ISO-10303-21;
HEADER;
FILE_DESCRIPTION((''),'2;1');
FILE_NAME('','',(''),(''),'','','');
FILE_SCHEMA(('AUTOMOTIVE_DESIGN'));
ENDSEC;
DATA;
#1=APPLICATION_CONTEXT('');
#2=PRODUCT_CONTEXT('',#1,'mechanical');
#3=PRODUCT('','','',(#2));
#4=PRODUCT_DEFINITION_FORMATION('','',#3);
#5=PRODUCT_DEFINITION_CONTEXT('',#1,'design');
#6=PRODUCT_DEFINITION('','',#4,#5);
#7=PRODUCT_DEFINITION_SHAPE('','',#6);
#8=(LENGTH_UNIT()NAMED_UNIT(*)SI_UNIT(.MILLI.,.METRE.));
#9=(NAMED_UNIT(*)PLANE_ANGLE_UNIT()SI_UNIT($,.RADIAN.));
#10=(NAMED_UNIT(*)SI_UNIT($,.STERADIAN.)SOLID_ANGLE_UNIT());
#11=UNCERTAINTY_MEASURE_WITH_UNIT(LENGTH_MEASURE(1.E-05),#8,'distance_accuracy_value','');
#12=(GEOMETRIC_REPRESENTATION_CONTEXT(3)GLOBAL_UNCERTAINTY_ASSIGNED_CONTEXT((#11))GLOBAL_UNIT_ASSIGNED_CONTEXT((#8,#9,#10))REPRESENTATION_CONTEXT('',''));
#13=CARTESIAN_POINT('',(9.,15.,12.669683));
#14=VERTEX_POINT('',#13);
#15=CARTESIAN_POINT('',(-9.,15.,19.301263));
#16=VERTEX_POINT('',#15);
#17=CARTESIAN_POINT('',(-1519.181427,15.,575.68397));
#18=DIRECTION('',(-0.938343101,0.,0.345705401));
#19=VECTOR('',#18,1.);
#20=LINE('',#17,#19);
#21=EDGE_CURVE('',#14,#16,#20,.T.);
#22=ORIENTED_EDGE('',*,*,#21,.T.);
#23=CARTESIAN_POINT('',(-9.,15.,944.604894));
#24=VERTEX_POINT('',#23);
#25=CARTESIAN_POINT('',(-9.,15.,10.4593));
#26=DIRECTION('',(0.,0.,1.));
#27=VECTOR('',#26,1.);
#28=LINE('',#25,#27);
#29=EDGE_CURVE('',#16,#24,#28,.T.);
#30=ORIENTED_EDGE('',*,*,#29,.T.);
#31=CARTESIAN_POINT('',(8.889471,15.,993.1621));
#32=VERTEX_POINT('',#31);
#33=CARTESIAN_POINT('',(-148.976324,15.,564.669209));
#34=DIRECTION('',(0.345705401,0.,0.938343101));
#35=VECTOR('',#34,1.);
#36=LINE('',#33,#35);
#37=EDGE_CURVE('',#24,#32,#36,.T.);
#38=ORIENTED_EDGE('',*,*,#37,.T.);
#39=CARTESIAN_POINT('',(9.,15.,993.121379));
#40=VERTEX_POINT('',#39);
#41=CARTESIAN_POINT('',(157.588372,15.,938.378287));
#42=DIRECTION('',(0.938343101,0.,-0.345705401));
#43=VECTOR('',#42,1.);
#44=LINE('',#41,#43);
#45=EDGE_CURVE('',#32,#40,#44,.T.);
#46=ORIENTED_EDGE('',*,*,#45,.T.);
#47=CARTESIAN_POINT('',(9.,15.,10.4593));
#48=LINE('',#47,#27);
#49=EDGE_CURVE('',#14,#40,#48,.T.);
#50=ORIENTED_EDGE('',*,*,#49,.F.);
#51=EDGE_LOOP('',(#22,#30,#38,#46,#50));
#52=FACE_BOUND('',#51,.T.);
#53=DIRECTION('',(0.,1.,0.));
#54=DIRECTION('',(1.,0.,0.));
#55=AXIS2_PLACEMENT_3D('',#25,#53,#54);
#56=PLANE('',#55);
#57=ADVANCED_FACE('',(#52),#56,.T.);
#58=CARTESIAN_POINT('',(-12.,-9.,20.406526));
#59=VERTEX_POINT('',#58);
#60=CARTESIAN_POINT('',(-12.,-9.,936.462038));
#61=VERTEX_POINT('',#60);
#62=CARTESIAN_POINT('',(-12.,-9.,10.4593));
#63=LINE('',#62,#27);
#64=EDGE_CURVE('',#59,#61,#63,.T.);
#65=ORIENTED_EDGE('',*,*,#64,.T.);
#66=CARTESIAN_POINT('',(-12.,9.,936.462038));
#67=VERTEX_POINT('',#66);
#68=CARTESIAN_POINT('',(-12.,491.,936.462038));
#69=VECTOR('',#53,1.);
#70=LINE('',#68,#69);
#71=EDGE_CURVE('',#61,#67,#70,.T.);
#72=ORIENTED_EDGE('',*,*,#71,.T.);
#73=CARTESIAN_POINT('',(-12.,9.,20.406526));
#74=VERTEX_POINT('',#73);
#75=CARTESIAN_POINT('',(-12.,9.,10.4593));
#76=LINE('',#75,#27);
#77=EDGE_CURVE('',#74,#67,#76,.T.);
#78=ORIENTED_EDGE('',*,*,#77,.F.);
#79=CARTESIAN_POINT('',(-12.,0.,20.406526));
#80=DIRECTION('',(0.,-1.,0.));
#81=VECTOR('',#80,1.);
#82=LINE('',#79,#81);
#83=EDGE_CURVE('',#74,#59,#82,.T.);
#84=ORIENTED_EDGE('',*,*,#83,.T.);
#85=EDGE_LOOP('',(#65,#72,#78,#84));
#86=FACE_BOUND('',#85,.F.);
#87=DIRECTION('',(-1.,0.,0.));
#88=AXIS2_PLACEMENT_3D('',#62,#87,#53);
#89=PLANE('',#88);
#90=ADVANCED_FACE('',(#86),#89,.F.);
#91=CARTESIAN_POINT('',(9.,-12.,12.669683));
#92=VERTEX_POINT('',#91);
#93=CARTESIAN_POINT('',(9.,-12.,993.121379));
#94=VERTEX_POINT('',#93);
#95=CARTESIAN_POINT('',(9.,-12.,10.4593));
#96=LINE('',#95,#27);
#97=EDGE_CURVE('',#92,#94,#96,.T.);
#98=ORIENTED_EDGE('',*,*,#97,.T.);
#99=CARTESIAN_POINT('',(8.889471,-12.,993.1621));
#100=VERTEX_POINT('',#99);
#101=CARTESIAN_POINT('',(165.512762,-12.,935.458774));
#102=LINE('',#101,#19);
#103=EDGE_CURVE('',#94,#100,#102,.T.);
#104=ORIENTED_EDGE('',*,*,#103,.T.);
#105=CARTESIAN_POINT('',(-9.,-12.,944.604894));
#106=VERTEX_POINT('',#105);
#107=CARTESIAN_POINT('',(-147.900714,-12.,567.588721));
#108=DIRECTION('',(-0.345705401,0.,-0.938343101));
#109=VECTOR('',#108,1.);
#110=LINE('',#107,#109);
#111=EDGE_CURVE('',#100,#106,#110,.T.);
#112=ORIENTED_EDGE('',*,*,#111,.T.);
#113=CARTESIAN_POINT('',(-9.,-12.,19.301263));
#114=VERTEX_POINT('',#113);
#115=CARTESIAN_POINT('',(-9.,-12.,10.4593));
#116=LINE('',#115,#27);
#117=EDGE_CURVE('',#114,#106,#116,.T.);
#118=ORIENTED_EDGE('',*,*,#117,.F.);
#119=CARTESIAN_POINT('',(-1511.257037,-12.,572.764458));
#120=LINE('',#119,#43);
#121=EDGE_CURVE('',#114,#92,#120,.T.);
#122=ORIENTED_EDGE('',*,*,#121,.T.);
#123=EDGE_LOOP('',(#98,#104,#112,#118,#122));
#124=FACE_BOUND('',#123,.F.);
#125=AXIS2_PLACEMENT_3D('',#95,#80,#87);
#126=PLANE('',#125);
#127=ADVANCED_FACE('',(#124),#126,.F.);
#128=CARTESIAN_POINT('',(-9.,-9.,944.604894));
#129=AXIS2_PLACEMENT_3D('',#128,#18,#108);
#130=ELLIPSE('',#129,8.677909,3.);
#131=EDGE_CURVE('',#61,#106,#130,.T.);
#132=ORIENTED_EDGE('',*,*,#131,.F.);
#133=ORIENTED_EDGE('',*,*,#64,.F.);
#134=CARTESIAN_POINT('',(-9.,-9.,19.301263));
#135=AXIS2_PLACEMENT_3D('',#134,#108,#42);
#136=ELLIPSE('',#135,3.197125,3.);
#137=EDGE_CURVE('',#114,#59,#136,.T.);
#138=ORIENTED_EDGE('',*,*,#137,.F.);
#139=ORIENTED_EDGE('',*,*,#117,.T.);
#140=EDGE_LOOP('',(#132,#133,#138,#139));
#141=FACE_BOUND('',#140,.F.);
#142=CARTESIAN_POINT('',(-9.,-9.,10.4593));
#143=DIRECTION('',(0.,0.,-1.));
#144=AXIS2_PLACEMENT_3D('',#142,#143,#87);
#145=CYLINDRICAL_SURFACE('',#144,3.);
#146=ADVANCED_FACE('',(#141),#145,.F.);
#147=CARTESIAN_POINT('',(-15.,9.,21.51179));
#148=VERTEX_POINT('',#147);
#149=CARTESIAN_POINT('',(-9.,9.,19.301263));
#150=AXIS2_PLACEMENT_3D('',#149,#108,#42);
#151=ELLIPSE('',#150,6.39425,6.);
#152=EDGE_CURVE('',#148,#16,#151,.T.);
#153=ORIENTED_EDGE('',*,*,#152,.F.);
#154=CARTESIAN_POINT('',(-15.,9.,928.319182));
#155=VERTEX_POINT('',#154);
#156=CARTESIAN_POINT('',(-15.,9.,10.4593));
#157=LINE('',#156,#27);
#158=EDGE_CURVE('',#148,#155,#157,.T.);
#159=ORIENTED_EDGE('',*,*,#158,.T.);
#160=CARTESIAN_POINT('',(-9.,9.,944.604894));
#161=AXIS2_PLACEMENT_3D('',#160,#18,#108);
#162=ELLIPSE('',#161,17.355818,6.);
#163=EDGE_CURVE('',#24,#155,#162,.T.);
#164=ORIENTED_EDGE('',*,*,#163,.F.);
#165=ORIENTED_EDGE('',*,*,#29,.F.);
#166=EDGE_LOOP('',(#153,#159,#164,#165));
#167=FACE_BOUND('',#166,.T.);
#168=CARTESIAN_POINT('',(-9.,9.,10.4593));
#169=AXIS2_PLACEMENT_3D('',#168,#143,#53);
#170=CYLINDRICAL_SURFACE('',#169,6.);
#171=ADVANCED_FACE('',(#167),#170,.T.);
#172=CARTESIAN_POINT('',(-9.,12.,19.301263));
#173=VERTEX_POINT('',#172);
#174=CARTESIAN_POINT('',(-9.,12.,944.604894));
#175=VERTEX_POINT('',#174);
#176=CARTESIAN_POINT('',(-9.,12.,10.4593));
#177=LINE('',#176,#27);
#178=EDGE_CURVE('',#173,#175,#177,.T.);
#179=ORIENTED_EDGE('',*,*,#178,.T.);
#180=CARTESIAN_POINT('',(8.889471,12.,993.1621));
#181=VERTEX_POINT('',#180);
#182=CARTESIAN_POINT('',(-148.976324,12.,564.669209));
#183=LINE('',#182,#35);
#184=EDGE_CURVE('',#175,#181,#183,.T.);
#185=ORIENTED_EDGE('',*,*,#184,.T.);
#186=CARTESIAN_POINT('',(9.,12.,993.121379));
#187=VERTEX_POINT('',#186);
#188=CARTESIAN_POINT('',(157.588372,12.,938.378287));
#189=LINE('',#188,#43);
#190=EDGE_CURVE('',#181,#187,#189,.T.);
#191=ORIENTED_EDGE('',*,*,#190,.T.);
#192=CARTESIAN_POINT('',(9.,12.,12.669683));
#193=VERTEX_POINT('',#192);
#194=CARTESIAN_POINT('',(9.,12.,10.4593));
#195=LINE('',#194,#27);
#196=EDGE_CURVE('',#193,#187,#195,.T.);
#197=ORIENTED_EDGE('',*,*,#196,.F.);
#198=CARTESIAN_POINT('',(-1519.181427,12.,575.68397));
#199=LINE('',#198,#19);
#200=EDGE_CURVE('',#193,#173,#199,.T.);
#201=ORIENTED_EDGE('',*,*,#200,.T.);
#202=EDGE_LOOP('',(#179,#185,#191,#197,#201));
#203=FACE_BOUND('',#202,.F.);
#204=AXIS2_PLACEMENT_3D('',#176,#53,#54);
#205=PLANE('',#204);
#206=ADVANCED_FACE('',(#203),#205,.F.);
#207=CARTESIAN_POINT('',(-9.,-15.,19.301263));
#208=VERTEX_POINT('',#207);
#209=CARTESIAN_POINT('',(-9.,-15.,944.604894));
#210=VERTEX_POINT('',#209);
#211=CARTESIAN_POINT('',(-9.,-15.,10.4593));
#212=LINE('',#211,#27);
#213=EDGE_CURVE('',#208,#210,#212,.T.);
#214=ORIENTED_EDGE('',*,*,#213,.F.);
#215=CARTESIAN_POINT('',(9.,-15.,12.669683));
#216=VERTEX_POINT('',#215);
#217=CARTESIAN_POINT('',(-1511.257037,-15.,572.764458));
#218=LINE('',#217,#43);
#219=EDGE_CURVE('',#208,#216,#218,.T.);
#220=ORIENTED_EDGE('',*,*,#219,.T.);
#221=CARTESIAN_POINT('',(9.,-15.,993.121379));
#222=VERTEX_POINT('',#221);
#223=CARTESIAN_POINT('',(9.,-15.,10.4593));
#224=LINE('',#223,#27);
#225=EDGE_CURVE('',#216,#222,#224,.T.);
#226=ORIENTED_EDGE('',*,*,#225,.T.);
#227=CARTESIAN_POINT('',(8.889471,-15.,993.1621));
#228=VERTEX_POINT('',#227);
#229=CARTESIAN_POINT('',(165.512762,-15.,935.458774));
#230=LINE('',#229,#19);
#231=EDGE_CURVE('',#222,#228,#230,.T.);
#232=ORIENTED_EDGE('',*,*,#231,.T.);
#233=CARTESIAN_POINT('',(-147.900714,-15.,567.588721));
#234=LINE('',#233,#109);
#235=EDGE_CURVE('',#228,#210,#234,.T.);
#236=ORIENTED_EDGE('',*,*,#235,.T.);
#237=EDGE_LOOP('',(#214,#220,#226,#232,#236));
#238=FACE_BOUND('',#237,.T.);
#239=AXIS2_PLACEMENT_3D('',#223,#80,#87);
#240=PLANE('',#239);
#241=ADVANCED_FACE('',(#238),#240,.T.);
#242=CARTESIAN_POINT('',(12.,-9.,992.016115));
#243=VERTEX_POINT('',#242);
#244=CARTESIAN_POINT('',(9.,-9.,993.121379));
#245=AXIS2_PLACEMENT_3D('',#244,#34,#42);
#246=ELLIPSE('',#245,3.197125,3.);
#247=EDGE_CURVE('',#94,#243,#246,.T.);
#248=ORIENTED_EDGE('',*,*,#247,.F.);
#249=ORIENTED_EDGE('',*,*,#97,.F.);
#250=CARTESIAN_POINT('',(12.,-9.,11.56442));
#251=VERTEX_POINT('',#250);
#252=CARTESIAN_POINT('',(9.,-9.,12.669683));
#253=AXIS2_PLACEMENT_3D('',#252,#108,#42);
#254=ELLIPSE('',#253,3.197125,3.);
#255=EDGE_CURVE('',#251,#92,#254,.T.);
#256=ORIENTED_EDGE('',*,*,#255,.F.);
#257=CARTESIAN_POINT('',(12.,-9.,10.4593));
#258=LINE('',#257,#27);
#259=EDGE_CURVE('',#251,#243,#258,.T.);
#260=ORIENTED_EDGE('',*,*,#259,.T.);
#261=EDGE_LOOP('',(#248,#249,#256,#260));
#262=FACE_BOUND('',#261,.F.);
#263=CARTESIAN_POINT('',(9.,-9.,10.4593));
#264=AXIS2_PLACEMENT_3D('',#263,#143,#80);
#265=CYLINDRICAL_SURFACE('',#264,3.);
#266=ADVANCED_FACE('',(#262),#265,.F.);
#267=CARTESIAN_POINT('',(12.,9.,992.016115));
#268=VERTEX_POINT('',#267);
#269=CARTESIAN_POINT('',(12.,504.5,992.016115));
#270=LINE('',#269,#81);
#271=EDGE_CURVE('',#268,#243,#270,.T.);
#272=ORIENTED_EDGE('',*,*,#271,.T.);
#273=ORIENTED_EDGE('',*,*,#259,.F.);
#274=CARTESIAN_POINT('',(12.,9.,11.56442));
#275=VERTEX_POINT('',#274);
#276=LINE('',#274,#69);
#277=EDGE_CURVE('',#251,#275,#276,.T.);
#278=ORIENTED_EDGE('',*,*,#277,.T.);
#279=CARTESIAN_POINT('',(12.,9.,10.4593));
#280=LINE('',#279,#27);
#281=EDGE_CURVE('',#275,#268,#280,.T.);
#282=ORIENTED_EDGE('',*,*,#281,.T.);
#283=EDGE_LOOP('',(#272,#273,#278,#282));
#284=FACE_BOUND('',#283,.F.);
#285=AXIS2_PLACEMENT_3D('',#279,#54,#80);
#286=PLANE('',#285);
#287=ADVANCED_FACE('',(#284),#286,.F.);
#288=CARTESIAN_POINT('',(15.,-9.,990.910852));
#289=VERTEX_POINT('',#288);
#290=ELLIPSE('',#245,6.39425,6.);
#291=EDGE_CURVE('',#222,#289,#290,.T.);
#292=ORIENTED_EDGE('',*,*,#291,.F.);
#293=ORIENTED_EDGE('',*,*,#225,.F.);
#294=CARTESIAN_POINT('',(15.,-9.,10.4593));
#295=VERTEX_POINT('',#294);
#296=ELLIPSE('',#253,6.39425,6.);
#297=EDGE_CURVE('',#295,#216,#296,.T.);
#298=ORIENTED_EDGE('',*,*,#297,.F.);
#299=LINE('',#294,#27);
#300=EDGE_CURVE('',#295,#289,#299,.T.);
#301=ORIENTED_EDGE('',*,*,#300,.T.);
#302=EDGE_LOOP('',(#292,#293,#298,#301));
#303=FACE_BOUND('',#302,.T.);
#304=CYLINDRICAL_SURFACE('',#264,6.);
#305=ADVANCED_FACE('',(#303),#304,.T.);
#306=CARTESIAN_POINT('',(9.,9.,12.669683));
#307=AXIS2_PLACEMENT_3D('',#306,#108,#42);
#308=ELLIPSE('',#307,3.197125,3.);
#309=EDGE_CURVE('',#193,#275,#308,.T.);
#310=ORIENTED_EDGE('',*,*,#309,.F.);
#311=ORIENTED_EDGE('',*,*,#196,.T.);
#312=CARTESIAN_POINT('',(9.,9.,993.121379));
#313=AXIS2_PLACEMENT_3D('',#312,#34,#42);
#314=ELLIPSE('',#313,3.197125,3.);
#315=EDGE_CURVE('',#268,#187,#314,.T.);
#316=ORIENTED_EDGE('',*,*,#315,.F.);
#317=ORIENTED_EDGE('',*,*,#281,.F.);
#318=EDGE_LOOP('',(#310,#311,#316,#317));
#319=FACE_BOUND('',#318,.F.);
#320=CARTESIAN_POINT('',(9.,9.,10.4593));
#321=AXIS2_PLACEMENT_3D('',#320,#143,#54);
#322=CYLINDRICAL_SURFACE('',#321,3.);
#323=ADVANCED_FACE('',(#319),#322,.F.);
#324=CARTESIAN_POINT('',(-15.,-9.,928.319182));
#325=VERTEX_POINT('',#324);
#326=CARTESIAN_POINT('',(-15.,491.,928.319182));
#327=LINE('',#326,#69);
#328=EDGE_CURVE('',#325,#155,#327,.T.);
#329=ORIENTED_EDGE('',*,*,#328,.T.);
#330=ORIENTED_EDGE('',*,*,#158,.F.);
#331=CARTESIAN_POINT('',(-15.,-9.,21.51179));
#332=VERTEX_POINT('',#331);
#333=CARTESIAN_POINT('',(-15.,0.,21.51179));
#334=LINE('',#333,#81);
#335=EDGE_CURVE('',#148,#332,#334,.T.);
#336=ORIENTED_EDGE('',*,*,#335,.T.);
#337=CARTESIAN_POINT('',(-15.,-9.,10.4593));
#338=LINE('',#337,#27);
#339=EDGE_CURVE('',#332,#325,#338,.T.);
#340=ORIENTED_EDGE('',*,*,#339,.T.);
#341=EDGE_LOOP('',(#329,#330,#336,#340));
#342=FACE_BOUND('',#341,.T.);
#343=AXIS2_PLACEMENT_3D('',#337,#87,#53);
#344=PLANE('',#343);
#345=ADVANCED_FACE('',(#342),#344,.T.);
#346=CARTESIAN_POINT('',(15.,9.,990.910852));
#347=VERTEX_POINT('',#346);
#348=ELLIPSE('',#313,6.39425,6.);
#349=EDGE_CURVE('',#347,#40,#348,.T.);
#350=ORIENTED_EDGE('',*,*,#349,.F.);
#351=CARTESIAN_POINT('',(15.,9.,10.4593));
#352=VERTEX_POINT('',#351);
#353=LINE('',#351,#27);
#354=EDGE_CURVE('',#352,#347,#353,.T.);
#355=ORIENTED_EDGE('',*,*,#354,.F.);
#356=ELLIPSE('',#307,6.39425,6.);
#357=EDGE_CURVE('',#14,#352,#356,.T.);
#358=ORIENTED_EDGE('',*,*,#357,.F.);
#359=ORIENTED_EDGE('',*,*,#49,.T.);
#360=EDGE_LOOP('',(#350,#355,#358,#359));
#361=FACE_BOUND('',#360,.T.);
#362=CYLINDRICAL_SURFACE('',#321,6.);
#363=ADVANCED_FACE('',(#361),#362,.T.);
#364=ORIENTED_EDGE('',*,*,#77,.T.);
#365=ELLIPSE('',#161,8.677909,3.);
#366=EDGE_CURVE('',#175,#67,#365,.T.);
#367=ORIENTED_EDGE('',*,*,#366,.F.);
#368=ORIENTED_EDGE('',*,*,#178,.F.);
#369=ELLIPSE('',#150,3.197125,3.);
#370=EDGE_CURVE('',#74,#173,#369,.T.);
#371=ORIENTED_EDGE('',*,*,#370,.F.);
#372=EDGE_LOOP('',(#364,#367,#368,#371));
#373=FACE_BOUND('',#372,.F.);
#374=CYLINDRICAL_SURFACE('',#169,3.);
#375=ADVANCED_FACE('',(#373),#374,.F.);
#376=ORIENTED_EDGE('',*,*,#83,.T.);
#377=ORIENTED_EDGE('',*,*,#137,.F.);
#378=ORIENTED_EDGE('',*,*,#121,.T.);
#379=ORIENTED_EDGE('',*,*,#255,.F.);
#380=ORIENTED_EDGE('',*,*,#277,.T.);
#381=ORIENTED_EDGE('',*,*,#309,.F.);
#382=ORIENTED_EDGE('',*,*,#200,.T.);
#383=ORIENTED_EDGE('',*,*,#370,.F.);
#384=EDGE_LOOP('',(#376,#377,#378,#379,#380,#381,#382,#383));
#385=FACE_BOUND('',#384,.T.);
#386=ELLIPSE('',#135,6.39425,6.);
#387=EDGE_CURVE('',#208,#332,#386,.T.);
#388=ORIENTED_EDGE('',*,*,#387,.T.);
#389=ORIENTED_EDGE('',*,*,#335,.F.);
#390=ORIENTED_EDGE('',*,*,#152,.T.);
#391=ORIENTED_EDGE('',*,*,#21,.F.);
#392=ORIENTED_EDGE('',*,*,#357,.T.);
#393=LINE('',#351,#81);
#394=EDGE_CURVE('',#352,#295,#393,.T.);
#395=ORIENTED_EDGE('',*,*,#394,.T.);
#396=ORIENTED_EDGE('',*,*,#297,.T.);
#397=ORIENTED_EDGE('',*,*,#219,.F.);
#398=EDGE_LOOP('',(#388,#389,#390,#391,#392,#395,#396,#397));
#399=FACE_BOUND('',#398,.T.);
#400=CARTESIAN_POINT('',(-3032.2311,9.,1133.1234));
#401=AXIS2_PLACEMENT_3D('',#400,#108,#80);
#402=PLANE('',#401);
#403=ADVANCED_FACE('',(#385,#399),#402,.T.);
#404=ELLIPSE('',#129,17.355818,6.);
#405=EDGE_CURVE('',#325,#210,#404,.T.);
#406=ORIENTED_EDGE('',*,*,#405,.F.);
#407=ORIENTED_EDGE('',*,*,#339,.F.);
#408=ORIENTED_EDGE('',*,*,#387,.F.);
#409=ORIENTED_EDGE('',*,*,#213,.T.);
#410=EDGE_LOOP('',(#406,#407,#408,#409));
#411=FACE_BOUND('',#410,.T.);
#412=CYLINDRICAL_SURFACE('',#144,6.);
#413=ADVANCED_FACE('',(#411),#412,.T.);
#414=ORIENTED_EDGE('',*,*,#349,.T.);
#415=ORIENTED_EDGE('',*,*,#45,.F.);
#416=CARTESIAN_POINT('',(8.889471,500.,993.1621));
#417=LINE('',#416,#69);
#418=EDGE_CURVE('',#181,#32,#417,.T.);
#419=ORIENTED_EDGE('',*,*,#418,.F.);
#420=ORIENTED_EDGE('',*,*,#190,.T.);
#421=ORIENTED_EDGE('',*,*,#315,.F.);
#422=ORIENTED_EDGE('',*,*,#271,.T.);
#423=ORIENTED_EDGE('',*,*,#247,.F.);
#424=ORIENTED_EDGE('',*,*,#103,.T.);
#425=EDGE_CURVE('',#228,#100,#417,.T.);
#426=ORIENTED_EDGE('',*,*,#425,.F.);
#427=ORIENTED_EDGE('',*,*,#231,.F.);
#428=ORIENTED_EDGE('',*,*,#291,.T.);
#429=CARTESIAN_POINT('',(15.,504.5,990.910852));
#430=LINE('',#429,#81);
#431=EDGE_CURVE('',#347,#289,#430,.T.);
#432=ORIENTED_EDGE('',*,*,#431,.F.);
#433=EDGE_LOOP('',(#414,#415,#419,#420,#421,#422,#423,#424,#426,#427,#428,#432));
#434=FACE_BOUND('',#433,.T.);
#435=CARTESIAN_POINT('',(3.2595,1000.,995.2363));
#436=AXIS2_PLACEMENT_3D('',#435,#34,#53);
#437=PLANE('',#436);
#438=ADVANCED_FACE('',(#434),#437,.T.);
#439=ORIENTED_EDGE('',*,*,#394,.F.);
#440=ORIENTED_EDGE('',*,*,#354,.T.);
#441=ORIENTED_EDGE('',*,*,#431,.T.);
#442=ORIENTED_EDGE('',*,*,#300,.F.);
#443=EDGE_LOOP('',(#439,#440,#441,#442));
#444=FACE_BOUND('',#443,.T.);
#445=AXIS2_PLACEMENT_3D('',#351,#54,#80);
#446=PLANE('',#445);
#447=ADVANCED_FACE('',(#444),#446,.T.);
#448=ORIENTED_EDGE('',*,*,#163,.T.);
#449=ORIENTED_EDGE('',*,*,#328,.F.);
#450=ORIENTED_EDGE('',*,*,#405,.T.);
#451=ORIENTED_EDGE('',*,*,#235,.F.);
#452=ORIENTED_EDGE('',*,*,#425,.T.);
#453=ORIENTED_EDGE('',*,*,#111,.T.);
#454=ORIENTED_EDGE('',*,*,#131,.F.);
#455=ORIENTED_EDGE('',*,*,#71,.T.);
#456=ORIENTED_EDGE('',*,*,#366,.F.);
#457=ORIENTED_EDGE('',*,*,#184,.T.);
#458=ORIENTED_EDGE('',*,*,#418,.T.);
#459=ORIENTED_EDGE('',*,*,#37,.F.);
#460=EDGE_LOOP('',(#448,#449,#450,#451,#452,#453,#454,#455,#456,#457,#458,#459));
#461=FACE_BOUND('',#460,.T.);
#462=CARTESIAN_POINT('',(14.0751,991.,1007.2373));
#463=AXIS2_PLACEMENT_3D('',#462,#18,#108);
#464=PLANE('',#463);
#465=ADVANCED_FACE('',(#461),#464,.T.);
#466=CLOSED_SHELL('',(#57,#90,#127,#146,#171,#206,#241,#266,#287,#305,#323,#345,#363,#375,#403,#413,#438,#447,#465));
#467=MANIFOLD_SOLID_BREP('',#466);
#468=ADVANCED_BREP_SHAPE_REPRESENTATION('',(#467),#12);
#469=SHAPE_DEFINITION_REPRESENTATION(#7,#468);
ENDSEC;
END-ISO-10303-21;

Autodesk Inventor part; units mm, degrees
ref_plane "Start Plane" through (0, 0, 10.4593) normal (0, 0, 1) x (1, 0, 0)
ref_plane "End Plane" through (0, 0, 993.1621) normal (0, 0, 1) x (1, 0, 0)
sketch "Sketch" plane through (0, 0, 0) normal (0, 0, 1) x (1, 0, 0)
  line L0 (-15, -9) -> (-15, 9)
  line L1 (-9, 15) -> (9, 15)
  line L2 (15, 9) -> (15, -9)
  line L3 (9, -15) -> (-9, -15)
  arc A0 (-15, -9) -> (-9, -15) centre (-9, -9) ccw
  arc A1 (-9, 15) -> (-15, 9) centre (-9, 9) ccw
  arc A2 (15, 9) -> (9, 15) centre (9, 9) ccw
  arc A3 (9, -15) -> (15, -9) centre (9, -9) ccw
  arc A4 (-9, 12) -> (-12, 9) centre (-9, 9) ccw
  line L4 (-9, 12) -> (9, 12)
  arc A5 (12, 9) -> (9, 12) centre (9, 9) ccw
  line L5 (12, 9) -> (12, -9)
  arc A6 (9, -12) -> (12, -9) centre (9, -9) ccw
  line L6 (9, -12) -> (-9, -12)
  arc A7 (-12, -9) -> (-9, -12) centre (-9, -9) ccw
  line L7 (-12, -9) -> (-12, 9)
  line L8 (0, 22.7397) -> (0, -22.7397) construction
  line L9 (-22.7397, 0) -> (22.7397, 0) construction
  dimension "d7" = 6
  dimension "d10" = 30
  dimension "d11" = 30
  dimension "d12" = 3
  dimension "d15" = 15
  dimension "d16" = 15
extrude "Body" add sketch "Sketch" along normal up to surface (982.7028 mm away) from surface at 10.4593
sketch "Sketch3" plane through (0, 0, 0) normal (0, 0, 1) x (1, 0, 0)
  line L0 (0, 0) -> (10, 0)
ref_plane "Work Plane3" through (0, 0, 0) normal (0, -1, 0) x (1, 0, 0)
ref_plane "Work Plane4" through (-3032.2311, 9, 1133.1234) normal (-0.3457054, 0, -0.9383431) x (-0.9383431, 0, 0.3457054)
split "Split1" plane through (-3032.2311, 9, 1133.1234) removes the side toward (-0.3457054, 0, -0.9383431)
ref_plane "Work Plane5" through (3.2595, 1000, 995.2363) normal (0.3457054, 0, 0.9383431) x (0.9383431, 0, -0.3457054)
split "Split2" plane through (3.2595, 1000, 995.2363) removes the side toward (0.3457054, 0, 0.9383431)
ref_plane "Work Plane6" through (14.0751, 991, 1007.2373) normal (-0.9383431, 0, 0.3457054) x (0.3457054, 0, 0.9383431)
split "Split3" plane through (14.0751, 991, 1007.2373) removes the side toward (-0.9383431, 0, 0.3457054)
sketch "Sketch4" plane through (0, 0, 0) normal (0, -1, 0) x (1, 0, 0)
  line L0 (-2, 10.4593) -> (12, 10.4593) projected
  line L1 (-2, 993.1621) -> (12, 993.1621) projected
  dimension "d18" = 982.7028
equation "\"d7\" = G_IR"
equation "\"d10\" = G_H"
equation "\"d11\" = G_W"
equation "\"d12\" = G_T"
equation "\"d15\" = 0.5 * d10"
equation "\"d16\" = 0.5 * d11"
equation "\"d3\" = G_L"
equation "\"G_W\" = 30"
equation "\"G_H\" = 30"
equation "\"G_T\" = 3"
equation "\"G_IR\" = 6"
equation "\"G_L\" = d18"
equation "\"G_OFFSET_START\" = -10.45931"
equation "\"G_OFFSET_END\" = -19.26073"
equation "\"d13\" = -G_OFFSET_START"
equation "\"d14\" = G_OFFSET_END + B_L"
equation "\"B_L\" = 1012.42284"
properties part number "DIN EN 10219-2 - 30 x 30 x 3  - 982.7" material "Steel, Mild"
